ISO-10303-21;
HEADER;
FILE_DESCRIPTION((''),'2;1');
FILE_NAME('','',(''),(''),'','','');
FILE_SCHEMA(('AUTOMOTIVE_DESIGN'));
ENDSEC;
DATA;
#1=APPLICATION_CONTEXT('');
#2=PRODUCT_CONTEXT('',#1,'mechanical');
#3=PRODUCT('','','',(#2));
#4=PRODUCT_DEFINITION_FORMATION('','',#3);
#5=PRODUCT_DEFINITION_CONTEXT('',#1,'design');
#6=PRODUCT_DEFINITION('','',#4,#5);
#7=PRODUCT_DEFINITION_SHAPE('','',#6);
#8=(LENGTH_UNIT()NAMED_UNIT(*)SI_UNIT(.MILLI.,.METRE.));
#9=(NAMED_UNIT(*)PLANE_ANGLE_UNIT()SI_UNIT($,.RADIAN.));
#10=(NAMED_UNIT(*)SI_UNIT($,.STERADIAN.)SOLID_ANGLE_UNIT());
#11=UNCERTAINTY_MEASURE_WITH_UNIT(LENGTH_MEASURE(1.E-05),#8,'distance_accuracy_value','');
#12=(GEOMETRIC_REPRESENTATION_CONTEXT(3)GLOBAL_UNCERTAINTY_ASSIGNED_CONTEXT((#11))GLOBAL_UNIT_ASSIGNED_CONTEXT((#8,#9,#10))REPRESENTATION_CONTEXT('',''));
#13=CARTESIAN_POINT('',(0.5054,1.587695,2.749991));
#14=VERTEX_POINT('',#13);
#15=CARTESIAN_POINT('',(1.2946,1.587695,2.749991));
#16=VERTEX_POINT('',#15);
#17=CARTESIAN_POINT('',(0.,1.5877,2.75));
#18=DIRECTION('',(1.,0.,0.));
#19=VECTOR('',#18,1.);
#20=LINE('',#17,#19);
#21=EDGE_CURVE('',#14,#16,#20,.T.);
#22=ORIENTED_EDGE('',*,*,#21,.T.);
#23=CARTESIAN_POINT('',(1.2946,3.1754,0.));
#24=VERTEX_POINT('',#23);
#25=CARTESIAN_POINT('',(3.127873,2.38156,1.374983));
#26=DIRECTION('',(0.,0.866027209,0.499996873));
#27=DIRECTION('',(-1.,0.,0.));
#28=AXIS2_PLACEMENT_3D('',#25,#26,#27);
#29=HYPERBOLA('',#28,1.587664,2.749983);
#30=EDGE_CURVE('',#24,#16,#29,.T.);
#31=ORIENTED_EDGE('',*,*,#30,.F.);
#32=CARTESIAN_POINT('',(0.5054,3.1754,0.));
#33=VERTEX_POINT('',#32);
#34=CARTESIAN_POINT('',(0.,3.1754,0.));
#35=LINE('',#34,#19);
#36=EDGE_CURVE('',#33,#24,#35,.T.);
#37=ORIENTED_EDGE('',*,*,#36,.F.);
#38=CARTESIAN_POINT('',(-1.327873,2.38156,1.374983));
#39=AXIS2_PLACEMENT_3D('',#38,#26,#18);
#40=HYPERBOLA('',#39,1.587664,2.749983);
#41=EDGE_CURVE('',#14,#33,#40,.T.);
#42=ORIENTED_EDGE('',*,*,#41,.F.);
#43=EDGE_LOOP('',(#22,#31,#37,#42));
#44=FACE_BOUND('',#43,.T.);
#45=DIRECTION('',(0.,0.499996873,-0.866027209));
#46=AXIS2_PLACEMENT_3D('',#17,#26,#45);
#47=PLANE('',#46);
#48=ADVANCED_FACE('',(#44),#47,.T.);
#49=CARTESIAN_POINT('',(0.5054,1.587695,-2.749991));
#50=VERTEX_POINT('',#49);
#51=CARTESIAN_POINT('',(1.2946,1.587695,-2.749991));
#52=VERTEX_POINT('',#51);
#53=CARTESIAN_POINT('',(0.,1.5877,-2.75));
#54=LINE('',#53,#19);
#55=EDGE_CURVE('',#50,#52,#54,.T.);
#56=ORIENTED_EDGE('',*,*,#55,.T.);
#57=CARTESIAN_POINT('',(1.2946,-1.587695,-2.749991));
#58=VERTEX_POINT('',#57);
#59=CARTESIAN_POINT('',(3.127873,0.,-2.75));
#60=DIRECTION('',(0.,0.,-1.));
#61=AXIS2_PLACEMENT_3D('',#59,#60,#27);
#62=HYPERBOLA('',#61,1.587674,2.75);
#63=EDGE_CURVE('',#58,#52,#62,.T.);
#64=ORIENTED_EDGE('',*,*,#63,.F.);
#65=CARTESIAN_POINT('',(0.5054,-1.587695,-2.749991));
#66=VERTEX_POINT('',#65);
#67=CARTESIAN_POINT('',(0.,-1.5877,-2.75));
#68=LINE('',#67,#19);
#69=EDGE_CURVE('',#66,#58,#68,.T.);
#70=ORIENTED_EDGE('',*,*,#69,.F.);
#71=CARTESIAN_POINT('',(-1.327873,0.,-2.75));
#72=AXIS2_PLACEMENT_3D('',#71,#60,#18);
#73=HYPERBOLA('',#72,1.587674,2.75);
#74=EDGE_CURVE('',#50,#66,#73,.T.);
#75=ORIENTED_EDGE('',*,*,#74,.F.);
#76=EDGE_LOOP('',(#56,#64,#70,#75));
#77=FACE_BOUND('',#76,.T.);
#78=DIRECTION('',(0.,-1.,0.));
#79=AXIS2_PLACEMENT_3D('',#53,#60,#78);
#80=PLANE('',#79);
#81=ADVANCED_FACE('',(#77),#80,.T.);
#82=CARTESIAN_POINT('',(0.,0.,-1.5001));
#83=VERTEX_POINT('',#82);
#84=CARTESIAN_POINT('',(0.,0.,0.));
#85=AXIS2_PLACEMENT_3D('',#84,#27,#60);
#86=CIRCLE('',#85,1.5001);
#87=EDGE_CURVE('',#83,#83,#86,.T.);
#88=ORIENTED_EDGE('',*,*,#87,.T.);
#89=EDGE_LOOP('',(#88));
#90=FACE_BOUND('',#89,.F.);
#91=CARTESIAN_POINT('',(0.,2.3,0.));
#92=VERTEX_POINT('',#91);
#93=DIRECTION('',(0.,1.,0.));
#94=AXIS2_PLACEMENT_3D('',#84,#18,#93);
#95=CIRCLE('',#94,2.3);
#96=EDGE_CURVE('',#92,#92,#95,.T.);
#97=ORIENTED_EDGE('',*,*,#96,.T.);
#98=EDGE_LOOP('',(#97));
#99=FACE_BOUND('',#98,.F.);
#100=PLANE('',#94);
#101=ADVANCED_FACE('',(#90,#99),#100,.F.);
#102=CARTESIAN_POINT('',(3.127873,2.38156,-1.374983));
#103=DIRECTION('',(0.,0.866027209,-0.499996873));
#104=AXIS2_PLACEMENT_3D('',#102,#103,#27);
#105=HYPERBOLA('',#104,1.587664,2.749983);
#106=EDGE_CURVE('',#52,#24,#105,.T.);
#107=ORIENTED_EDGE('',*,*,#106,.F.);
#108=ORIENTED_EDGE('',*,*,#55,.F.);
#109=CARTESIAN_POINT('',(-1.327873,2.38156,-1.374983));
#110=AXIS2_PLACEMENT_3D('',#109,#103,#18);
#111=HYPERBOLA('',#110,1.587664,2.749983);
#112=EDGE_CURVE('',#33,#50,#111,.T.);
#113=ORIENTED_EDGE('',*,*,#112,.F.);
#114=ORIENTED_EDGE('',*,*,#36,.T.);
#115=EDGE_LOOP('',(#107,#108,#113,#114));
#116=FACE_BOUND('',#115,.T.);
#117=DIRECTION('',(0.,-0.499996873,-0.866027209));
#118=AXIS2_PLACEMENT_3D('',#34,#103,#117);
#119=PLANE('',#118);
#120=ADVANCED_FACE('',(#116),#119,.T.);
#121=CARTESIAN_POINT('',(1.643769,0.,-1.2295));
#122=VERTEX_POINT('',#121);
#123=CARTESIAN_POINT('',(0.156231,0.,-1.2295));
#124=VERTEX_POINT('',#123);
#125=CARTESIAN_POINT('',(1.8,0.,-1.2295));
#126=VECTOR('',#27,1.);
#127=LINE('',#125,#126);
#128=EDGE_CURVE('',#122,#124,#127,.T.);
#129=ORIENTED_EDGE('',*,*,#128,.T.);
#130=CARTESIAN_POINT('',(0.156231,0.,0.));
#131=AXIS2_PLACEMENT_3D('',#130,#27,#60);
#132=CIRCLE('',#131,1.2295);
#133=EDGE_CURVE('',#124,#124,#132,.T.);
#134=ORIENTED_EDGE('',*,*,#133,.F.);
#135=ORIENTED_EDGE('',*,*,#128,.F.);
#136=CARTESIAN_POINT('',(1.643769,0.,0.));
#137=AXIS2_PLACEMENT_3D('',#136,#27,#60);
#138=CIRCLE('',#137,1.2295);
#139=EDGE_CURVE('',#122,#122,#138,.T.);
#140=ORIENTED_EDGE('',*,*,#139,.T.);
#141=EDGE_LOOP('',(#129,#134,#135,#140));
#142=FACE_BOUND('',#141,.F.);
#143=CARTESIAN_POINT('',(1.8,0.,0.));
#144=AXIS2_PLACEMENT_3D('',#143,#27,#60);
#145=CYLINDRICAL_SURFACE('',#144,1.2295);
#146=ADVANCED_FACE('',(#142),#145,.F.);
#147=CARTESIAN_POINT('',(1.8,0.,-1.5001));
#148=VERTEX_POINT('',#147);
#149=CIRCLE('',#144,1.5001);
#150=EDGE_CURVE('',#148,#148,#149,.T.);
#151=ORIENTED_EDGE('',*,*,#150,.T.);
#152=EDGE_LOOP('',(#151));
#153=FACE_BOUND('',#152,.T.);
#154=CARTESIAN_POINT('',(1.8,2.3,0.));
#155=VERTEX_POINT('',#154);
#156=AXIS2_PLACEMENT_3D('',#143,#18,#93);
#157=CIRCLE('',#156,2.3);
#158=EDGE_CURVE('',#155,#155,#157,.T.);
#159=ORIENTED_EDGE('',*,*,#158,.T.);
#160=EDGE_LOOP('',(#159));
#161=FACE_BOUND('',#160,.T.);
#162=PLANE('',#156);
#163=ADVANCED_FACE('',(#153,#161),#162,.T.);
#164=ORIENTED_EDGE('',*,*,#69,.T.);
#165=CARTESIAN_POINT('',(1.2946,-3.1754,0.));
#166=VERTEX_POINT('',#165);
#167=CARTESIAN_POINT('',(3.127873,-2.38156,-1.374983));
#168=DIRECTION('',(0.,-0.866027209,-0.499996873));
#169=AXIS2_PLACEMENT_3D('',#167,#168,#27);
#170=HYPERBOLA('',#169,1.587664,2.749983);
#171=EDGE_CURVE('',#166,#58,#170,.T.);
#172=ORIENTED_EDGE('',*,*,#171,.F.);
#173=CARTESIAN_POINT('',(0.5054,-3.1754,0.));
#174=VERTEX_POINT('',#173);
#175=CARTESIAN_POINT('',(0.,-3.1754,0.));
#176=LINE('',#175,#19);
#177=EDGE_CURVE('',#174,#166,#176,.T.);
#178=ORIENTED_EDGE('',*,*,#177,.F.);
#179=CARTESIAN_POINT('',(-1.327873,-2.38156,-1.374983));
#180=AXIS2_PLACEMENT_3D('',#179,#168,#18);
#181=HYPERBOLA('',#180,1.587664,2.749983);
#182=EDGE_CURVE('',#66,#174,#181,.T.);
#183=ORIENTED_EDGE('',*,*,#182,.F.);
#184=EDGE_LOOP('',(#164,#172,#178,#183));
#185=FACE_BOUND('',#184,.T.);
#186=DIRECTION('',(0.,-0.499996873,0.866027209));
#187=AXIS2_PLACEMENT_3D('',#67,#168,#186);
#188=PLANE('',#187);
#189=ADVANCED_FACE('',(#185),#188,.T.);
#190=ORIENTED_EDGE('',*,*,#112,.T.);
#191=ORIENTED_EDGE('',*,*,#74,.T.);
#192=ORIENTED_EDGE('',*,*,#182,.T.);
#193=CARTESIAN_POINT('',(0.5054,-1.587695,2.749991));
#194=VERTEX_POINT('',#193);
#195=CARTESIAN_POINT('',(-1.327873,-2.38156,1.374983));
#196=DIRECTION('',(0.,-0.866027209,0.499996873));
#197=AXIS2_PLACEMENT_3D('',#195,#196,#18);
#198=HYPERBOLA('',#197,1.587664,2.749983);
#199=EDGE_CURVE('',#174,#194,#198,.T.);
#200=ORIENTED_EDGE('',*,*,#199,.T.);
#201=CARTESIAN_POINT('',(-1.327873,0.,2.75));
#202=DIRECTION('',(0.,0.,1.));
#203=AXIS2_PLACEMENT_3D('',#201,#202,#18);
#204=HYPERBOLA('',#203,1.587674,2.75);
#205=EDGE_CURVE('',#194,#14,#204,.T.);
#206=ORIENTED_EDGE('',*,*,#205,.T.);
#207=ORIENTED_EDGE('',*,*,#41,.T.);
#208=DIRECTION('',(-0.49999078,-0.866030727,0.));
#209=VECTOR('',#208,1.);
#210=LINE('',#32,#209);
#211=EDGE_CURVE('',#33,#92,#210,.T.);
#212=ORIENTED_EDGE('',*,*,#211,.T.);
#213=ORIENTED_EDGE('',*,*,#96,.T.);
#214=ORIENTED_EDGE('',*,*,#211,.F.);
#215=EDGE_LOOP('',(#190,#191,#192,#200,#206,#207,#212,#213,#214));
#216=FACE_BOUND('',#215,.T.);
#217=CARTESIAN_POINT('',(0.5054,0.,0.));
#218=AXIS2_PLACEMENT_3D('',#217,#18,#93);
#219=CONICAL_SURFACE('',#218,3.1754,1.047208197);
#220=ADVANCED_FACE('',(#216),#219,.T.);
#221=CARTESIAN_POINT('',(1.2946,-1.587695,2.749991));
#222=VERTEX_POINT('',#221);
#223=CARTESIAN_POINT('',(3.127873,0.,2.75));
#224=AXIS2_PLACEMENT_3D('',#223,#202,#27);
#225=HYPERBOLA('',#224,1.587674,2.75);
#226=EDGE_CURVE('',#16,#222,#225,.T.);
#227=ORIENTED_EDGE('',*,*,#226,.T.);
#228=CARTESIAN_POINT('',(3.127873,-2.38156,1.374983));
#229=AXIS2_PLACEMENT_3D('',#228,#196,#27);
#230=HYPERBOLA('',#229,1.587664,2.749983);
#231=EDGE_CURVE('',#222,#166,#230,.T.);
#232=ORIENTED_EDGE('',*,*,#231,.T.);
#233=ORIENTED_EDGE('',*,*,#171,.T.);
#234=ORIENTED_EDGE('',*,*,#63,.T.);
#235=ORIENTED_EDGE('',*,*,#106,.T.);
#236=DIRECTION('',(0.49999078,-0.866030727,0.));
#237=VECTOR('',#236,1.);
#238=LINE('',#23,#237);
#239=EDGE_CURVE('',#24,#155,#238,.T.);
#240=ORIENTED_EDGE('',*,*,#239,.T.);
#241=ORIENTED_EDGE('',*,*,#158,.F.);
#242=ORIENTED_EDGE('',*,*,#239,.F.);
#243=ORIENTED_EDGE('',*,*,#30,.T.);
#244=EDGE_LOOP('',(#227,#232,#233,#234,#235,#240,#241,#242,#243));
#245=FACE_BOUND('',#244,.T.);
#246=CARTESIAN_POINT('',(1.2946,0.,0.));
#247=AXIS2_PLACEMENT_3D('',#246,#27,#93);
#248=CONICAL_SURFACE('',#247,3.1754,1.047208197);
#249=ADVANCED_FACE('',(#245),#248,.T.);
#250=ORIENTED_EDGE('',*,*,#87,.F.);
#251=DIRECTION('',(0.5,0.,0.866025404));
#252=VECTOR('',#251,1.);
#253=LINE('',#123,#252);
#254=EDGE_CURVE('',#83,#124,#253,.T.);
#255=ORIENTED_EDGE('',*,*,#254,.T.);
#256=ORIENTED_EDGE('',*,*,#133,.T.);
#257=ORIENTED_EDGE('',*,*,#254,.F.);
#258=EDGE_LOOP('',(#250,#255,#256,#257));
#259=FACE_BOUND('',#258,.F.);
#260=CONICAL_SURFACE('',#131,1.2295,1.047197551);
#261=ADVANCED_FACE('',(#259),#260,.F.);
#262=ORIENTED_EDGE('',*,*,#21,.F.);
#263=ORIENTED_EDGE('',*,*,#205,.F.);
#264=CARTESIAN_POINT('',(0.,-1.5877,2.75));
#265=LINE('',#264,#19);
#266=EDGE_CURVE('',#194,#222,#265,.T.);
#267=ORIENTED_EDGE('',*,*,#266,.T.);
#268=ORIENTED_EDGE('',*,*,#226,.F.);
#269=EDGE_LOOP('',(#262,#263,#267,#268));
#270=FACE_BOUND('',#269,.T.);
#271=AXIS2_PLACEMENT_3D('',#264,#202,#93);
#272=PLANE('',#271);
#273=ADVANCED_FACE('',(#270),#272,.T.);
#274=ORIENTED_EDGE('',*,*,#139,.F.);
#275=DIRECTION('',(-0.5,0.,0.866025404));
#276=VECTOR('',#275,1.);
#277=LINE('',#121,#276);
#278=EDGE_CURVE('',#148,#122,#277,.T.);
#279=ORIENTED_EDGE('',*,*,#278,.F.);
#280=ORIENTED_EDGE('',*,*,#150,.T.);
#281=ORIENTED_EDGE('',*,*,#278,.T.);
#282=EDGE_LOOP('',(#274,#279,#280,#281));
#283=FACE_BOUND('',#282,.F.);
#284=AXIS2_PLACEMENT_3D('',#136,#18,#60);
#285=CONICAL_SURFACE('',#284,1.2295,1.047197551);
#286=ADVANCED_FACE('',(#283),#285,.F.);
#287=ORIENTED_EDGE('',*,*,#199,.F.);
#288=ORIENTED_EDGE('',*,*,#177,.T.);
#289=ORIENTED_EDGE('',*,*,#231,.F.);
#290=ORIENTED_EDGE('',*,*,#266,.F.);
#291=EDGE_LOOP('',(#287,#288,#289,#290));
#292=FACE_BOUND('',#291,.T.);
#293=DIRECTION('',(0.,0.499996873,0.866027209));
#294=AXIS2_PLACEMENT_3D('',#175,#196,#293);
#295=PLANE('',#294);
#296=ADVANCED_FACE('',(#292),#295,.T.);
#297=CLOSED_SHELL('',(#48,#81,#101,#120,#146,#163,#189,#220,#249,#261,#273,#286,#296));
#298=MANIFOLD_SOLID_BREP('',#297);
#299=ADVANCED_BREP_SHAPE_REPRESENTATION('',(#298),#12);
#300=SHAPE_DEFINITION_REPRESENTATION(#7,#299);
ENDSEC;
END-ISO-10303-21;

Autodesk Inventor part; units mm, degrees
ref_plane "YZ Plane" through (0, 0, 0) normal (1, 0, 0) x (0, 1, 0)
ref_plane "XZ Plane" through (0, 0, 0) normal (0, 1, 0) x (-1, 0, 0)
sketch "Szkic1" plane through (0, 0, 0) normal (1, 0, 0) x (0, 1, 0)
  line L0 (-3.1754, 0) -> (-1.5877, 2.75)
  line L1 (-1.5877, 2.75) -> (1.5877, 2.75)
  line L2 (1.5877, 2.75) -> (3.1754, 0)
  line L3 (3.1754, 0) -> (1.5877, -2.75)
  line L4 (1.5877, -2.75) -> (-1.5877, -2.75)
  line L5 (-1.5877, -2.75) -> (-3.1754, 0)
  point P0 (0, 0)
  point P1 (0, 0)
  dimension "d0" = 6.3509
extrude "Bryła" add sketch "Szkic1" along normal blind 1.8
sketch "Szkic2" plane through (0, 0, 0) normal (0, 0, 1) x (1, 0, 0)
  line L0 (0, 1.5877) -> (0, 3.1754) projected
  line L1 (0, 3.1754) -> (1.8, 3.1754) projected
  line L2 (1.8, 1.5877) -> (1.8, 3.1754) projected
  line L3 (-0.36, 0) -> (2.16, 0) projected
  line L4 (0.5054, 3.1754) -> (0, 2.3)
  line L5 (1.2946, 3.1754) -> (1.8, 2.3)
  dimension "d3" = 30
  dimension "d4" = 30
  dimension "d5" = 4.6
  dimension "d6" = 4.6
revolve "Faza1" cut sketch "Szkic2" angle 360 about axis through (-10, 0, 0) along (1, 0, 0)
sketch "Szkic3" plane through (1.8, 0, 0) normal (1, 0, 0) x (0, 0, -1)
  arc A0 (-0.625, -1.0825) -> (0.625, -1.0825) centre (0, 0) ccw projected
hole "Gwint" at (1.8, 0, 0) direction (-1, 0, 0) diameter 2.459 end through all thread size "M3x0.5" class "6H" standard "ISO Metric profile"
chamfer "Faza2" distance 0.2706 angle 30 1 edges at (1.8, 0, 1.2295) measured on face at (1.8, 1.9179, -0.2329)
chamfer "Faza3" distance 0.2706 angle 30 1 edges at (0, 0, 1.2295) measured on face at (0, 1.9179, -0.2329)
ref_plane "Work Plane1" through (-6.7921, 0, 0) normal (0, -0.8660254, -0.5) x (1, 0, 0)
equation "\"d0\" = 1.1547 * SW"
equation "\"d1\" = KOH"
equation "\"d3\" = ANG1"
equation "\"d4\" = ANG2"
equation "\"d5\" = SW0"
equation "\"d6\" = SW01"
equation "\"d8\" = -0.5 * GD1 + 0.5 * NND"
equation "\"d40\" = -0.5 * GD1 + 0.5 * NND"
equation "\"d10\" = -0.5 * GD1 + 0.5 * NND"
equation "\"d41\" = -0.5 * GD1 + 0.5 * NND"
equation "\"ANG1\" = 30deg"
equation "\"ANG2\" = 30deg"
equation "\"NND\" = 3"
equation "\"KOH\" = 1.8"
equation "\"SW\" = 5.5"
equation "\"SW0\" = 4.6"
equation "\"SW01\" = SW0"
equation "\"GUL\" = 0.541266 * PTC"
equation "\"THREADDIA\" = 3"
equation "\"TOA\" = 30deg"
equation "\"PTC\" = 0.5"
equation "\"E0\" = 1.155 * SW"
equation "\"GAL\" = 0.541266 * PTC"
equation "\"GD1\" = 2.458734"
properties part number "ISO 4035 - M3" material "Stal nierdzewna 440C"
